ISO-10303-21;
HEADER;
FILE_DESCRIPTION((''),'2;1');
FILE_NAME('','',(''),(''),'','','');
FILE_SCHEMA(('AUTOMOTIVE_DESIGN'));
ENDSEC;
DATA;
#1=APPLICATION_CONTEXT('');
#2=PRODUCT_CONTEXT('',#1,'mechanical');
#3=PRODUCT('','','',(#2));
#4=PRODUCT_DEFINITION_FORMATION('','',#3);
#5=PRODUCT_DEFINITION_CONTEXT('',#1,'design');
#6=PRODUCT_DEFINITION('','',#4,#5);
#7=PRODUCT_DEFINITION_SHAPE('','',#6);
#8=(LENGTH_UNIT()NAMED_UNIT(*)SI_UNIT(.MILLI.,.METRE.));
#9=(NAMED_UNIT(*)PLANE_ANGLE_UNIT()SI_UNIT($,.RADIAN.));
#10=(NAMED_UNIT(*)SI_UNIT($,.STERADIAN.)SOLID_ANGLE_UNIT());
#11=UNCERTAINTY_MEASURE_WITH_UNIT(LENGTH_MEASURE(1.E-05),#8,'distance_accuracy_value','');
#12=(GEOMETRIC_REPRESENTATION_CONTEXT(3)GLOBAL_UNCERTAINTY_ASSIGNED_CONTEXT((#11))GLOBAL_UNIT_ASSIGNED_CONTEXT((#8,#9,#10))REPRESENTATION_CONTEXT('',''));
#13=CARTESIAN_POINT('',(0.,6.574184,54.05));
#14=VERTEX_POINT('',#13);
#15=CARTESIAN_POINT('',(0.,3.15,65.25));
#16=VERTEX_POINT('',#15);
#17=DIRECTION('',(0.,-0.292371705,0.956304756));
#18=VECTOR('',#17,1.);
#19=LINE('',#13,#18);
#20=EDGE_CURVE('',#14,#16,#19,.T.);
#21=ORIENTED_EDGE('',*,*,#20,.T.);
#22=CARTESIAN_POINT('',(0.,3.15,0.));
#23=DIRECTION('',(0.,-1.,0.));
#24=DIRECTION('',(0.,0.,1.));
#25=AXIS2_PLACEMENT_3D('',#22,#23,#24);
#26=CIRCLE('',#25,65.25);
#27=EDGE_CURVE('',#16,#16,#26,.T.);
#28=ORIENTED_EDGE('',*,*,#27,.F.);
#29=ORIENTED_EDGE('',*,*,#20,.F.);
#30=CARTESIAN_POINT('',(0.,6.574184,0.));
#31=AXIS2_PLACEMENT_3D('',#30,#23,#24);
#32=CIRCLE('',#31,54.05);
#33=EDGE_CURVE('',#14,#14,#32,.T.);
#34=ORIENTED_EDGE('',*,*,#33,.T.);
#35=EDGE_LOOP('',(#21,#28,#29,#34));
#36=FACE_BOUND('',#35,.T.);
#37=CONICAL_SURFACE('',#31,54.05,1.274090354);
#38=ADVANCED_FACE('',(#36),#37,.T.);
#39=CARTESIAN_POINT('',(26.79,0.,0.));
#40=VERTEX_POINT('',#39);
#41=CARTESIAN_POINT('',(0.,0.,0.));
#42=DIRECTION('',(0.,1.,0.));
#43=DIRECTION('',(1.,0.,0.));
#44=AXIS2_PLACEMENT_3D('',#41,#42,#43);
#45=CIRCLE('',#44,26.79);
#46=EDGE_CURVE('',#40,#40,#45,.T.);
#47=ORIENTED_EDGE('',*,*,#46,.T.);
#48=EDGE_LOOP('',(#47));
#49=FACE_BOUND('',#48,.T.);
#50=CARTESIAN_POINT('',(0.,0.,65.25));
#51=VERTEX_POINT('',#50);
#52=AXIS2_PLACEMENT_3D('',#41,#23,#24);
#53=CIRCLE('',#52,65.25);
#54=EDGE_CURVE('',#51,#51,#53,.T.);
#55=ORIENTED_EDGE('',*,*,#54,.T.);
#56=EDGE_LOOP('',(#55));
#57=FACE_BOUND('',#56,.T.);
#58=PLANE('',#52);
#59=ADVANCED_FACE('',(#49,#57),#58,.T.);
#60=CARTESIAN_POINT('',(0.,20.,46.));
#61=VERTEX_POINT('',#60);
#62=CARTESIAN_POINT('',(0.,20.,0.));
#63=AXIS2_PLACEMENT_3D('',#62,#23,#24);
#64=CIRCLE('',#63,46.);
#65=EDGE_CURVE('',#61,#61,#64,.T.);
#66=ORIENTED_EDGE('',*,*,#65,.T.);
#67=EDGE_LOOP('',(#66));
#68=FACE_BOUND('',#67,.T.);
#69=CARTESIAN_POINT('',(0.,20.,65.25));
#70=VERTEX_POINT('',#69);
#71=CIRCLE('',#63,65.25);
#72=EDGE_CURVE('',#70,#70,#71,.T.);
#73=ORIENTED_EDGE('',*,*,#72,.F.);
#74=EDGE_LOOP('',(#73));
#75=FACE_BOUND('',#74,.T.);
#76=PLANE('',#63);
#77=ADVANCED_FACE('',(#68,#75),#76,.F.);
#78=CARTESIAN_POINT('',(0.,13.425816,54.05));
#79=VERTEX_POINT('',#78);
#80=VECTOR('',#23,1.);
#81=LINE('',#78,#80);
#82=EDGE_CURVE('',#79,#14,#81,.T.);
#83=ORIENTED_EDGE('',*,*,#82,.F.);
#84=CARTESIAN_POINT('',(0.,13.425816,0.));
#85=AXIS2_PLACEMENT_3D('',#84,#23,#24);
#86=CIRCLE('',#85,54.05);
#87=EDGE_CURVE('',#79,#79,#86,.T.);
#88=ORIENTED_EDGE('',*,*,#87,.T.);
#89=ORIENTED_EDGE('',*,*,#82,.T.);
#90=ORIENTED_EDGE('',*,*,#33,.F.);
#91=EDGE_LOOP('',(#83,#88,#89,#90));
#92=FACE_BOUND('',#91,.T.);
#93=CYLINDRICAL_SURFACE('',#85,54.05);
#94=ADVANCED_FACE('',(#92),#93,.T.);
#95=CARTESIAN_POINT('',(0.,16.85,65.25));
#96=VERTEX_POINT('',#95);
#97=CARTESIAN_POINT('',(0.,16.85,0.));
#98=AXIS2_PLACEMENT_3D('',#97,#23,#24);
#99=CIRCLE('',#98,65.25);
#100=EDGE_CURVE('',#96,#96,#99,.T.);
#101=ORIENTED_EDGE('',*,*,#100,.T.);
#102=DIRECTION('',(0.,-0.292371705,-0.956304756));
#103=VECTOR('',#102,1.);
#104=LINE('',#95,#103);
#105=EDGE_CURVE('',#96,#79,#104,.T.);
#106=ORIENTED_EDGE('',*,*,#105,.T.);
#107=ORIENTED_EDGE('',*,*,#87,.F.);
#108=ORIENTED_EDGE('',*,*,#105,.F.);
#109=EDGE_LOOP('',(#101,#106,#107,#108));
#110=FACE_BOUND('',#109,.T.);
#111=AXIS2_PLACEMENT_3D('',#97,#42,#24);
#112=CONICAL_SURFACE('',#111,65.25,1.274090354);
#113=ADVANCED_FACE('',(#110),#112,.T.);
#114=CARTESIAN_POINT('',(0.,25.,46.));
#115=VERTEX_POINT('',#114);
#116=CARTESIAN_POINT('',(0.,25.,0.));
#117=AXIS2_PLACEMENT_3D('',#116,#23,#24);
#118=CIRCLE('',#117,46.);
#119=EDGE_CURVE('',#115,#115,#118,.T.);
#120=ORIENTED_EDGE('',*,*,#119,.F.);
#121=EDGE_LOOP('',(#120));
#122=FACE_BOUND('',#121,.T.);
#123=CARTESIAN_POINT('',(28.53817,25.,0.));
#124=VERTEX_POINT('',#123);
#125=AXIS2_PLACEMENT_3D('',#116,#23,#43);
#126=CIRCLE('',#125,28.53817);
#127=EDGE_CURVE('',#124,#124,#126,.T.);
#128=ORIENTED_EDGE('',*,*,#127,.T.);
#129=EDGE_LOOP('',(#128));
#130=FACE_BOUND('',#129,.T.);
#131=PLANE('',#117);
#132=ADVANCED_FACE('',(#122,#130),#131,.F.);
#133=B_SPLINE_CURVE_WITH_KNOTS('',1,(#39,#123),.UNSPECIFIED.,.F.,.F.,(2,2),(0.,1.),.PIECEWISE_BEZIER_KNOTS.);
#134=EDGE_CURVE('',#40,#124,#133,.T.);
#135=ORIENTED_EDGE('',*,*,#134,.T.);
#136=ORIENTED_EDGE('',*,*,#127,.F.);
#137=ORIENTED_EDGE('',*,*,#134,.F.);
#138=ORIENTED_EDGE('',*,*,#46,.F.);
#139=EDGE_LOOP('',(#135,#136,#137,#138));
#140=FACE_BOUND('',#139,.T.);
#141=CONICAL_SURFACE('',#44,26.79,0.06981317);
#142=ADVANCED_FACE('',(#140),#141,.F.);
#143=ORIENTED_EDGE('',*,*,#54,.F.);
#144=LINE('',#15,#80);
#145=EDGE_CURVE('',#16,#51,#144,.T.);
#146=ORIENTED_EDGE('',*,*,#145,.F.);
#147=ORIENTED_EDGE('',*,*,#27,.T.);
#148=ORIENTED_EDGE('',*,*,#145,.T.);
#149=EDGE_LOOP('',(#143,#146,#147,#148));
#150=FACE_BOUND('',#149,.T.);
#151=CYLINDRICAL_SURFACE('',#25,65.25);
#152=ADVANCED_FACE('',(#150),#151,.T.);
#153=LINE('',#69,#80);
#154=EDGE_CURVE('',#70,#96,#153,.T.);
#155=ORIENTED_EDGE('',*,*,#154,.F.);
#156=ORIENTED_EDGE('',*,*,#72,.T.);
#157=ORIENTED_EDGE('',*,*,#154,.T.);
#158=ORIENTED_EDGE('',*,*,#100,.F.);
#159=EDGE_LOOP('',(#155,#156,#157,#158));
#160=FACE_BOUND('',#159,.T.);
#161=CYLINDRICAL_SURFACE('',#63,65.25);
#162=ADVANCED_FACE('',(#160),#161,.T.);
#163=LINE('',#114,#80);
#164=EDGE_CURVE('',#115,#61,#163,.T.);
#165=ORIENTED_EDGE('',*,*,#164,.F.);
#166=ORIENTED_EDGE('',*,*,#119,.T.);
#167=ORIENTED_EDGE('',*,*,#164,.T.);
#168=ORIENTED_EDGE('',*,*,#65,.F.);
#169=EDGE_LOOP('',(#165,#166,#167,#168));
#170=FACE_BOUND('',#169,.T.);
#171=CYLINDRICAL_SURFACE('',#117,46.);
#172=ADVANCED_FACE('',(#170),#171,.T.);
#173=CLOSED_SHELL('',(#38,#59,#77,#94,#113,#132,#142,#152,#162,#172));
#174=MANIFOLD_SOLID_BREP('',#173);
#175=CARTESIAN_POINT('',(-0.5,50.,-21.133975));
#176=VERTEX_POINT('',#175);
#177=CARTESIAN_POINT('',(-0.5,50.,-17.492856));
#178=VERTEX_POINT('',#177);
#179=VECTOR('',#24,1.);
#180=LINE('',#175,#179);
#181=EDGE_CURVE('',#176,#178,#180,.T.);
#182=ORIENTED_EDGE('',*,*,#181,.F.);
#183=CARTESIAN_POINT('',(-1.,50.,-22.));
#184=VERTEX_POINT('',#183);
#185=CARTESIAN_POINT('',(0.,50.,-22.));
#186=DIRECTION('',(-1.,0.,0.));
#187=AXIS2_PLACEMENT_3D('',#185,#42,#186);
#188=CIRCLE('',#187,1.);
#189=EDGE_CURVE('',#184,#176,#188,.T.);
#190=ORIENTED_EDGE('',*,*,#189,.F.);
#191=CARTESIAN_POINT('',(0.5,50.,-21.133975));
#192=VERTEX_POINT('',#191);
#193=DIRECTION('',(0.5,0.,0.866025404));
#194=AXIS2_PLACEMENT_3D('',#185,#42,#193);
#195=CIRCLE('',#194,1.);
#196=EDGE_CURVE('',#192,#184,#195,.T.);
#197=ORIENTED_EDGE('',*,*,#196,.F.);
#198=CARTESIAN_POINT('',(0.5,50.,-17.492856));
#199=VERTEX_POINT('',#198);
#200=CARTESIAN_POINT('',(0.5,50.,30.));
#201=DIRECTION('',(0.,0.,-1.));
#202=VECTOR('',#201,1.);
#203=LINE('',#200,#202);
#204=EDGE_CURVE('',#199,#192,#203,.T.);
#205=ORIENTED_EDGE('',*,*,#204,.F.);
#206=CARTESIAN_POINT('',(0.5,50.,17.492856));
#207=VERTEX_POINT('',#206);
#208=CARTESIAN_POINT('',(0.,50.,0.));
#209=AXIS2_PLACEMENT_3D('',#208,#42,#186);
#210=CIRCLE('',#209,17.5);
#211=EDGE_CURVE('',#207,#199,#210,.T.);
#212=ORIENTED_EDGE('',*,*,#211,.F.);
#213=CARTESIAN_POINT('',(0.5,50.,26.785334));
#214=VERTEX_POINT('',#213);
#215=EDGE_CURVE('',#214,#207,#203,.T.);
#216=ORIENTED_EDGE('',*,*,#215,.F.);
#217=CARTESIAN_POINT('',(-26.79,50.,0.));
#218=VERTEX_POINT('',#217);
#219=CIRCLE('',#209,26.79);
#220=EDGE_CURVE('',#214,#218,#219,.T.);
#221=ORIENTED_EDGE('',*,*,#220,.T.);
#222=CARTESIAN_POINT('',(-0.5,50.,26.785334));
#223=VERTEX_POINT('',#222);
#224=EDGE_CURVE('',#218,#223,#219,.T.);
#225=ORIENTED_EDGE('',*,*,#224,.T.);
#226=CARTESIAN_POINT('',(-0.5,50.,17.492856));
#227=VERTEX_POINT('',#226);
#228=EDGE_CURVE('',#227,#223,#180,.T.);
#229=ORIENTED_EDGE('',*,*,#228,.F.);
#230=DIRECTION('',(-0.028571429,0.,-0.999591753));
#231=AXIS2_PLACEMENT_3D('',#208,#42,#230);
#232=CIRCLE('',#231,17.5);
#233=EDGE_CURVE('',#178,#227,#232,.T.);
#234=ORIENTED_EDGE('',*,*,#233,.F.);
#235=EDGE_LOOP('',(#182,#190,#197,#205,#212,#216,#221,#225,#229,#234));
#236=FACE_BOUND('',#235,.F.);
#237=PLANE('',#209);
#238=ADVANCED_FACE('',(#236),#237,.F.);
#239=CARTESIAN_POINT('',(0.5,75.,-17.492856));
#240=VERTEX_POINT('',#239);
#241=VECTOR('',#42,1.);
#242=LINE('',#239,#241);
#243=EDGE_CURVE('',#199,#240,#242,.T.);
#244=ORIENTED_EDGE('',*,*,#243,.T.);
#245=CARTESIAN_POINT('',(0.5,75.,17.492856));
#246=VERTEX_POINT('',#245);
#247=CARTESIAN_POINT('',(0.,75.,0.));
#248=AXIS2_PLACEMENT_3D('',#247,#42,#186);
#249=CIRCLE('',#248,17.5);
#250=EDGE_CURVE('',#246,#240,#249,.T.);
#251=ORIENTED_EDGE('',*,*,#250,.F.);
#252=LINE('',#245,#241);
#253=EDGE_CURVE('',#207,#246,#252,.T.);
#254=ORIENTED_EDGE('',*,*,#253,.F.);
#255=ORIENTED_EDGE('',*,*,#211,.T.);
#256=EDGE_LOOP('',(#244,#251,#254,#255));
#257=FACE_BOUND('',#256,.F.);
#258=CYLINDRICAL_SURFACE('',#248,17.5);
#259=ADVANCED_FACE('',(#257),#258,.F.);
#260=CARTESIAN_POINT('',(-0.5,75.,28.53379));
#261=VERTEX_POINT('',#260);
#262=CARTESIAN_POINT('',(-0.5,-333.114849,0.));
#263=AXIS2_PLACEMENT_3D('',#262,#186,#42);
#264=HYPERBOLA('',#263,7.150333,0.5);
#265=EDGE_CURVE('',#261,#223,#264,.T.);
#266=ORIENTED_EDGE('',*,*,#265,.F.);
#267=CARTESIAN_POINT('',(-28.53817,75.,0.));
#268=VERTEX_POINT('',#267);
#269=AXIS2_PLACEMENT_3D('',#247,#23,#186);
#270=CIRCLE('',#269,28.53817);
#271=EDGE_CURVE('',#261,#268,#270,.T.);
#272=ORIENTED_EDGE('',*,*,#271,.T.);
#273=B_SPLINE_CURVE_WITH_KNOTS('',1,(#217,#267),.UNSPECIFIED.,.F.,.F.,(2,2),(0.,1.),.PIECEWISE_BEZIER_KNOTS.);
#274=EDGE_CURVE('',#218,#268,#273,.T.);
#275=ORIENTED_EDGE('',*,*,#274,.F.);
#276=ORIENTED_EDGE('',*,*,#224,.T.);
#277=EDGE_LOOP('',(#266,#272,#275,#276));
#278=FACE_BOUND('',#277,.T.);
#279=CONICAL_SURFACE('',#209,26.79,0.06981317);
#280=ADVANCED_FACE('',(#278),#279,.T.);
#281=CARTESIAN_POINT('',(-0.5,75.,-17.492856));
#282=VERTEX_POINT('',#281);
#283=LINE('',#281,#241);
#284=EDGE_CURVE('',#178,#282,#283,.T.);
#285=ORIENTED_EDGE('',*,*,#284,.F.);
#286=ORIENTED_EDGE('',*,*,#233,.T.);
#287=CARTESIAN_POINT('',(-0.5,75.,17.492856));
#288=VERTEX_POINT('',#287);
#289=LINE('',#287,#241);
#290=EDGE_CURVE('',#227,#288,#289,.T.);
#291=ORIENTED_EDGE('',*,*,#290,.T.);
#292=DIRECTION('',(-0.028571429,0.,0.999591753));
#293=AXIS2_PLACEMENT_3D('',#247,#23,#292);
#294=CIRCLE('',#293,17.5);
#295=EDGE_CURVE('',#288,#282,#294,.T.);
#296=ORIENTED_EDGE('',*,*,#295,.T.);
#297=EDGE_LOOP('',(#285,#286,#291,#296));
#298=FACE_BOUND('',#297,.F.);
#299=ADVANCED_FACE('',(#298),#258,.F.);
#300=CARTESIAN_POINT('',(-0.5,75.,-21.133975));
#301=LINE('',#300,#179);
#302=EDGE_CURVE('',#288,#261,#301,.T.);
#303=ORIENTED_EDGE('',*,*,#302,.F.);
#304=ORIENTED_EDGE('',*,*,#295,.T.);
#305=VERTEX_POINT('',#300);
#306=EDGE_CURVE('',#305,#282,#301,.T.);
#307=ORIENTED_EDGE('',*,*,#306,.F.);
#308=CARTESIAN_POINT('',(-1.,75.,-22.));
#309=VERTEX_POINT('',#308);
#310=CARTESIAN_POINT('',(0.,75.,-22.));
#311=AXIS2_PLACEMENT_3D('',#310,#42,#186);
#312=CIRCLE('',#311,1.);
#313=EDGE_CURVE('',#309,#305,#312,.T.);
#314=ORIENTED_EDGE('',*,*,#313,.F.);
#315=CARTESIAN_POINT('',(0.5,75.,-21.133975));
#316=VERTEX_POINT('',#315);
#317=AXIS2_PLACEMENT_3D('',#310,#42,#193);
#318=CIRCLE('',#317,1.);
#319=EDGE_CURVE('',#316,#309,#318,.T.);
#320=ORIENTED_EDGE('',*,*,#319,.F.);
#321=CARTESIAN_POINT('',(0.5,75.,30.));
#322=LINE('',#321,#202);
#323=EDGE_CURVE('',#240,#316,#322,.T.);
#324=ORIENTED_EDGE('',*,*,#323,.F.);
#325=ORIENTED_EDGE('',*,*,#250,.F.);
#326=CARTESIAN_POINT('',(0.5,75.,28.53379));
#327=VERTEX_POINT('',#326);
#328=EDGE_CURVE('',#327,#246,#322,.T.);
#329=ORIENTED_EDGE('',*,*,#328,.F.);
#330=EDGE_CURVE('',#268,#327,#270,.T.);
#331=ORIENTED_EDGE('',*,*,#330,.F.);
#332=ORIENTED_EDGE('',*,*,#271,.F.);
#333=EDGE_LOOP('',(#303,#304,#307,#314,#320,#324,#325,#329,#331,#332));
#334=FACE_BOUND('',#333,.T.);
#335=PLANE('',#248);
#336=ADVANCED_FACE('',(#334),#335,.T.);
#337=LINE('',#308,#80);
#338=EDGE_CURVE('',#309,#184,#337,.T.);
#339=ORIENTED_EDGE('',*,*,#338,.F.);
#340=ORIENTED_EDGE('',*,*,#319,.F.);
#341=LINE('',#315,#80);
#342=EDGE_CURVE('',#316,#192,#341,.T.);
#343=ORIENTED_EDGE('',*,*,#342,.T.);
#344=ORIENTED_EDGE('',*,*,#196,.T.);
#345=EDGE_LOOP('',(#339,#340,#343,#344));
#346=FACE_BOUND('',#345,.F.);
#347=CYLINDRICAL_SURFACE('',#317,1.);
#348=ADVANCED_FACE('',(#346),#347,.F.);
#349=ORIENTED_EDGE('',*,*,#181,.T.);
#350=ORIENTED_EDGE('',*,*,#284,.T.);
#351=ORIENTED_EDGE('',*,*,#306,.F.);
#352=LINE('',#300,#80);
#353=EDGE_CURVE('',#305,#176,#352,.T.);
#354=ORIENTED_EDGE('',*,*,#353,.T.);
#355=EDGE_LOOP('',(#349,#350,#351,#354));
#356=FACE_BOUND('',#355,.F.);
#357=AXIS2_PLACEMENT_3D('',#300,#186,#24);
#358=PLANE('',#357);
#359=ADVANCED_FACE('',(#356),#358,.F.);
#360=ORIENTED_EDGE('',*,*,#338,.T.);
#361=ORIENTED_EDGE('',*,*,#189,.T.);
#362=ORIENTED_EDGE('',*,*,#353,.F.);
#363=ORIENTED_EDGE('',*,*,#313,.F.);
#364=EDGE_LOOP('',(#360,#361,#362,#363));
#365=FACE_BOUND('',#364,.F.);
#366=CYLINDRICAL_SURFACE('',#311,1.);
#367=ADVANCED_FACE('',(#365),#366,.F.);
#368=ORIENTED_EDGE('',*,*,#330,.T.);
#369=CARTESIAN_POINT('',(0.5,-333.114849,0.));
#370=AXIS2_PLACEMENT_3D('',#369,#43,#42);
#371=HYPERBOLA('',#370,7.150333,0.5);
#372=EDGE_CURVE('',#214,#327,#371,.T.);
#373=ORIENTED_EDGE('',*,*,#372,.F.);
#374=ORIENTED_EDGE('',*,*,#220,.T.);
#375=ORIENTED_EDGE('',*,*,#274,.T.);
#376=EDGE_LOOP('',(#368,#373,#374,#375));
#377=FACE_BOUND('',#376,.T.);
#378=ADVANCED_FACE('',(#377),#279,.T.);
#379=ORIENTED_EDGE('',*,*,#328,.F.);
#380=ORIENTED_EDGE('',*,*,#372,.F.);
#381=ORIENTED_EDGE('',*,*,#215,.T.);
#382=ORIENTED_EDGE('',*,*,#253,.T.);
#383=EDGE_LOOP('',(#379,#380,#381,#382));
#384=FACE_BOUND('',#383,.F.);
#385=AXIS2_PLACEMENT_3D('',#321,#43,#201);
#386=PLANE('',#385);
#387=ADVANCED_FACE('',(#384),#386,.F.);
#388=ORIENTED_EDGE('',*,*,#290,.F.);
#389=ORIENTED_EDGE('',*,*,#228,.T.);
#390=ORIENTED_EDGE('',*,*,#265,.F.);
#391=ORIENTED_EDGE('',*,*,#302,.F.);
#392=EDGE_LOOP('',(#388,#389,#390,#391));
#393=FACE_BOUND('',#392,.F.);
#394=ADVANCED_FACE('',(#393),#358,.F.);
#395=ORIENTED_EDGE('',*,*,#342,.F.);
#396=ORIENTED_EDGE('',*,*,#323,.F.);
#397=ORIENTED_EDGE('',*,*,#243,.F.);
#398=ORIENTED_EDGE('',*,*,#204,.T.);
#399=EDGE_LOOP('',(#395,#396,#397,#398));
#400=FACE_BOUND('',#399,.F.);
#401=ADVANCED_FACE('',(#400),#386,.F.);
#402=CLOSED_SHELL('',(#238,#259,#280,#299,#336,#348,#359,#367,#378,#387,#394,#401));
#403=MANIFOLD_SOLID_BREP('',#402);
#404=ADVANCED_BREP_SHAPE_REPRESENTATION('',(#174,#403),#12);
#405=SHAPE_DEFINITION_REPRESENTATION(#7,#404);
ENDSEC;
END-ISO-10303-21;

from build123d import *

# Parameters (mm, degrees)
F2_R      = 26.79
F3_DEPTH  = 25
F3_TAPER  = -4
F5_R      = 26.79
F6_DEPTH  = 25
F6_TAPER  = -4
F7_R      = 17.5
F8_DEPTH  = 25
F10_DEPTH = 25


with BuildPart() as f1:
    # F0 (on Right) → F1 (revolve)
    with BuildSketch(Plane.YZ):
        Polygon((0, 65.25), (0, 0), (25, 0), (25, 46), (20, 46), (20, 65.25), (16.85, 65.25), (13.4258163677, 54.05), (6.5741836323, 54.05), (3.15, 65.25), align=None)
    revolve(axis=Axis((0, 12.5, 0), (0, -1, 0)))

    # F2 (on face) → F3 (cut)
    with BuildSketch(Plane.XZ):
        Circle(F2_R)
    extrude(amount=-F3_DEPTH, taper=F3_TAPER, mode=Mode.SUBTRACT)


with BuildPart() as f6:
    # F5 (on offset) → F6 (new body)
    with BuildSketch(Plane(origin=(0, 50, 0), x_dir=(-1, 0, 0), z_dir=(0, 1, 0))):
        Circle(F5_R)
    extrude(amount=F6_DEPTH, taper=F6_TAPER)

    # F7 (on face) → F8 (cut, through all)
    with BuildSketch(Plane(origin=(0, 75, 0), x_dir=(-1, 0, 0), z_dir=(0, 1, 0))):
        Circle(F7_R)
    extrude(amount=-F8_DEPTH, mode=Mode.SUBTRACT)

    # F9 (on face) → F10 (cut, through all)
    with BuildSketch(Plane(origin=(0, 75, 0), x_dir=(-1, 0, 0), z_dir=(0, 1, 0))):
        with BuildLine():
            Line((0.5, -21.1339745962), (0.5, 30))
            Line((0.5, 30), (-0.5, 30))
            Line((-0.5, 30), (-0.5, -21.1339745962))
            ThreePointArc((-0.5, -21.1339745962), (0, -21), (0.5, -21.1339745962))
        make_face()
        with BuildLine():
            ThreePointArc((1, -22), (0.8660254038, -21.5), (0.5, -21.1339745962))
            Line((0.5, -21.1339745962), (0.5, -22))
            Line((0.5, -22), (-0.5, -22))
            Line((-0.5, -22), (-0.5, -21.1339745962))
            ThreePointArc((-0.5, -21.1339745962), (-0.5, -22.8660254038), (1, -22))
        make_face()
        with BuildLine():
            Line((0.5, -22), (0.5, -21.1339745962))
            ThreePointArc((0.5, -21.1339745962), (0, -21), (-0.5, -21.1339745962))
            Line((-0.5, -21.1339745962), (-0.5, -22))
            Line((-0.5, -22), (0.5, -22))
        make_face()
    extrude(amount=-F10_DEPTH, mode=Mode.SUBTRACT)


solid = Compound([f1.part, f6.part])
